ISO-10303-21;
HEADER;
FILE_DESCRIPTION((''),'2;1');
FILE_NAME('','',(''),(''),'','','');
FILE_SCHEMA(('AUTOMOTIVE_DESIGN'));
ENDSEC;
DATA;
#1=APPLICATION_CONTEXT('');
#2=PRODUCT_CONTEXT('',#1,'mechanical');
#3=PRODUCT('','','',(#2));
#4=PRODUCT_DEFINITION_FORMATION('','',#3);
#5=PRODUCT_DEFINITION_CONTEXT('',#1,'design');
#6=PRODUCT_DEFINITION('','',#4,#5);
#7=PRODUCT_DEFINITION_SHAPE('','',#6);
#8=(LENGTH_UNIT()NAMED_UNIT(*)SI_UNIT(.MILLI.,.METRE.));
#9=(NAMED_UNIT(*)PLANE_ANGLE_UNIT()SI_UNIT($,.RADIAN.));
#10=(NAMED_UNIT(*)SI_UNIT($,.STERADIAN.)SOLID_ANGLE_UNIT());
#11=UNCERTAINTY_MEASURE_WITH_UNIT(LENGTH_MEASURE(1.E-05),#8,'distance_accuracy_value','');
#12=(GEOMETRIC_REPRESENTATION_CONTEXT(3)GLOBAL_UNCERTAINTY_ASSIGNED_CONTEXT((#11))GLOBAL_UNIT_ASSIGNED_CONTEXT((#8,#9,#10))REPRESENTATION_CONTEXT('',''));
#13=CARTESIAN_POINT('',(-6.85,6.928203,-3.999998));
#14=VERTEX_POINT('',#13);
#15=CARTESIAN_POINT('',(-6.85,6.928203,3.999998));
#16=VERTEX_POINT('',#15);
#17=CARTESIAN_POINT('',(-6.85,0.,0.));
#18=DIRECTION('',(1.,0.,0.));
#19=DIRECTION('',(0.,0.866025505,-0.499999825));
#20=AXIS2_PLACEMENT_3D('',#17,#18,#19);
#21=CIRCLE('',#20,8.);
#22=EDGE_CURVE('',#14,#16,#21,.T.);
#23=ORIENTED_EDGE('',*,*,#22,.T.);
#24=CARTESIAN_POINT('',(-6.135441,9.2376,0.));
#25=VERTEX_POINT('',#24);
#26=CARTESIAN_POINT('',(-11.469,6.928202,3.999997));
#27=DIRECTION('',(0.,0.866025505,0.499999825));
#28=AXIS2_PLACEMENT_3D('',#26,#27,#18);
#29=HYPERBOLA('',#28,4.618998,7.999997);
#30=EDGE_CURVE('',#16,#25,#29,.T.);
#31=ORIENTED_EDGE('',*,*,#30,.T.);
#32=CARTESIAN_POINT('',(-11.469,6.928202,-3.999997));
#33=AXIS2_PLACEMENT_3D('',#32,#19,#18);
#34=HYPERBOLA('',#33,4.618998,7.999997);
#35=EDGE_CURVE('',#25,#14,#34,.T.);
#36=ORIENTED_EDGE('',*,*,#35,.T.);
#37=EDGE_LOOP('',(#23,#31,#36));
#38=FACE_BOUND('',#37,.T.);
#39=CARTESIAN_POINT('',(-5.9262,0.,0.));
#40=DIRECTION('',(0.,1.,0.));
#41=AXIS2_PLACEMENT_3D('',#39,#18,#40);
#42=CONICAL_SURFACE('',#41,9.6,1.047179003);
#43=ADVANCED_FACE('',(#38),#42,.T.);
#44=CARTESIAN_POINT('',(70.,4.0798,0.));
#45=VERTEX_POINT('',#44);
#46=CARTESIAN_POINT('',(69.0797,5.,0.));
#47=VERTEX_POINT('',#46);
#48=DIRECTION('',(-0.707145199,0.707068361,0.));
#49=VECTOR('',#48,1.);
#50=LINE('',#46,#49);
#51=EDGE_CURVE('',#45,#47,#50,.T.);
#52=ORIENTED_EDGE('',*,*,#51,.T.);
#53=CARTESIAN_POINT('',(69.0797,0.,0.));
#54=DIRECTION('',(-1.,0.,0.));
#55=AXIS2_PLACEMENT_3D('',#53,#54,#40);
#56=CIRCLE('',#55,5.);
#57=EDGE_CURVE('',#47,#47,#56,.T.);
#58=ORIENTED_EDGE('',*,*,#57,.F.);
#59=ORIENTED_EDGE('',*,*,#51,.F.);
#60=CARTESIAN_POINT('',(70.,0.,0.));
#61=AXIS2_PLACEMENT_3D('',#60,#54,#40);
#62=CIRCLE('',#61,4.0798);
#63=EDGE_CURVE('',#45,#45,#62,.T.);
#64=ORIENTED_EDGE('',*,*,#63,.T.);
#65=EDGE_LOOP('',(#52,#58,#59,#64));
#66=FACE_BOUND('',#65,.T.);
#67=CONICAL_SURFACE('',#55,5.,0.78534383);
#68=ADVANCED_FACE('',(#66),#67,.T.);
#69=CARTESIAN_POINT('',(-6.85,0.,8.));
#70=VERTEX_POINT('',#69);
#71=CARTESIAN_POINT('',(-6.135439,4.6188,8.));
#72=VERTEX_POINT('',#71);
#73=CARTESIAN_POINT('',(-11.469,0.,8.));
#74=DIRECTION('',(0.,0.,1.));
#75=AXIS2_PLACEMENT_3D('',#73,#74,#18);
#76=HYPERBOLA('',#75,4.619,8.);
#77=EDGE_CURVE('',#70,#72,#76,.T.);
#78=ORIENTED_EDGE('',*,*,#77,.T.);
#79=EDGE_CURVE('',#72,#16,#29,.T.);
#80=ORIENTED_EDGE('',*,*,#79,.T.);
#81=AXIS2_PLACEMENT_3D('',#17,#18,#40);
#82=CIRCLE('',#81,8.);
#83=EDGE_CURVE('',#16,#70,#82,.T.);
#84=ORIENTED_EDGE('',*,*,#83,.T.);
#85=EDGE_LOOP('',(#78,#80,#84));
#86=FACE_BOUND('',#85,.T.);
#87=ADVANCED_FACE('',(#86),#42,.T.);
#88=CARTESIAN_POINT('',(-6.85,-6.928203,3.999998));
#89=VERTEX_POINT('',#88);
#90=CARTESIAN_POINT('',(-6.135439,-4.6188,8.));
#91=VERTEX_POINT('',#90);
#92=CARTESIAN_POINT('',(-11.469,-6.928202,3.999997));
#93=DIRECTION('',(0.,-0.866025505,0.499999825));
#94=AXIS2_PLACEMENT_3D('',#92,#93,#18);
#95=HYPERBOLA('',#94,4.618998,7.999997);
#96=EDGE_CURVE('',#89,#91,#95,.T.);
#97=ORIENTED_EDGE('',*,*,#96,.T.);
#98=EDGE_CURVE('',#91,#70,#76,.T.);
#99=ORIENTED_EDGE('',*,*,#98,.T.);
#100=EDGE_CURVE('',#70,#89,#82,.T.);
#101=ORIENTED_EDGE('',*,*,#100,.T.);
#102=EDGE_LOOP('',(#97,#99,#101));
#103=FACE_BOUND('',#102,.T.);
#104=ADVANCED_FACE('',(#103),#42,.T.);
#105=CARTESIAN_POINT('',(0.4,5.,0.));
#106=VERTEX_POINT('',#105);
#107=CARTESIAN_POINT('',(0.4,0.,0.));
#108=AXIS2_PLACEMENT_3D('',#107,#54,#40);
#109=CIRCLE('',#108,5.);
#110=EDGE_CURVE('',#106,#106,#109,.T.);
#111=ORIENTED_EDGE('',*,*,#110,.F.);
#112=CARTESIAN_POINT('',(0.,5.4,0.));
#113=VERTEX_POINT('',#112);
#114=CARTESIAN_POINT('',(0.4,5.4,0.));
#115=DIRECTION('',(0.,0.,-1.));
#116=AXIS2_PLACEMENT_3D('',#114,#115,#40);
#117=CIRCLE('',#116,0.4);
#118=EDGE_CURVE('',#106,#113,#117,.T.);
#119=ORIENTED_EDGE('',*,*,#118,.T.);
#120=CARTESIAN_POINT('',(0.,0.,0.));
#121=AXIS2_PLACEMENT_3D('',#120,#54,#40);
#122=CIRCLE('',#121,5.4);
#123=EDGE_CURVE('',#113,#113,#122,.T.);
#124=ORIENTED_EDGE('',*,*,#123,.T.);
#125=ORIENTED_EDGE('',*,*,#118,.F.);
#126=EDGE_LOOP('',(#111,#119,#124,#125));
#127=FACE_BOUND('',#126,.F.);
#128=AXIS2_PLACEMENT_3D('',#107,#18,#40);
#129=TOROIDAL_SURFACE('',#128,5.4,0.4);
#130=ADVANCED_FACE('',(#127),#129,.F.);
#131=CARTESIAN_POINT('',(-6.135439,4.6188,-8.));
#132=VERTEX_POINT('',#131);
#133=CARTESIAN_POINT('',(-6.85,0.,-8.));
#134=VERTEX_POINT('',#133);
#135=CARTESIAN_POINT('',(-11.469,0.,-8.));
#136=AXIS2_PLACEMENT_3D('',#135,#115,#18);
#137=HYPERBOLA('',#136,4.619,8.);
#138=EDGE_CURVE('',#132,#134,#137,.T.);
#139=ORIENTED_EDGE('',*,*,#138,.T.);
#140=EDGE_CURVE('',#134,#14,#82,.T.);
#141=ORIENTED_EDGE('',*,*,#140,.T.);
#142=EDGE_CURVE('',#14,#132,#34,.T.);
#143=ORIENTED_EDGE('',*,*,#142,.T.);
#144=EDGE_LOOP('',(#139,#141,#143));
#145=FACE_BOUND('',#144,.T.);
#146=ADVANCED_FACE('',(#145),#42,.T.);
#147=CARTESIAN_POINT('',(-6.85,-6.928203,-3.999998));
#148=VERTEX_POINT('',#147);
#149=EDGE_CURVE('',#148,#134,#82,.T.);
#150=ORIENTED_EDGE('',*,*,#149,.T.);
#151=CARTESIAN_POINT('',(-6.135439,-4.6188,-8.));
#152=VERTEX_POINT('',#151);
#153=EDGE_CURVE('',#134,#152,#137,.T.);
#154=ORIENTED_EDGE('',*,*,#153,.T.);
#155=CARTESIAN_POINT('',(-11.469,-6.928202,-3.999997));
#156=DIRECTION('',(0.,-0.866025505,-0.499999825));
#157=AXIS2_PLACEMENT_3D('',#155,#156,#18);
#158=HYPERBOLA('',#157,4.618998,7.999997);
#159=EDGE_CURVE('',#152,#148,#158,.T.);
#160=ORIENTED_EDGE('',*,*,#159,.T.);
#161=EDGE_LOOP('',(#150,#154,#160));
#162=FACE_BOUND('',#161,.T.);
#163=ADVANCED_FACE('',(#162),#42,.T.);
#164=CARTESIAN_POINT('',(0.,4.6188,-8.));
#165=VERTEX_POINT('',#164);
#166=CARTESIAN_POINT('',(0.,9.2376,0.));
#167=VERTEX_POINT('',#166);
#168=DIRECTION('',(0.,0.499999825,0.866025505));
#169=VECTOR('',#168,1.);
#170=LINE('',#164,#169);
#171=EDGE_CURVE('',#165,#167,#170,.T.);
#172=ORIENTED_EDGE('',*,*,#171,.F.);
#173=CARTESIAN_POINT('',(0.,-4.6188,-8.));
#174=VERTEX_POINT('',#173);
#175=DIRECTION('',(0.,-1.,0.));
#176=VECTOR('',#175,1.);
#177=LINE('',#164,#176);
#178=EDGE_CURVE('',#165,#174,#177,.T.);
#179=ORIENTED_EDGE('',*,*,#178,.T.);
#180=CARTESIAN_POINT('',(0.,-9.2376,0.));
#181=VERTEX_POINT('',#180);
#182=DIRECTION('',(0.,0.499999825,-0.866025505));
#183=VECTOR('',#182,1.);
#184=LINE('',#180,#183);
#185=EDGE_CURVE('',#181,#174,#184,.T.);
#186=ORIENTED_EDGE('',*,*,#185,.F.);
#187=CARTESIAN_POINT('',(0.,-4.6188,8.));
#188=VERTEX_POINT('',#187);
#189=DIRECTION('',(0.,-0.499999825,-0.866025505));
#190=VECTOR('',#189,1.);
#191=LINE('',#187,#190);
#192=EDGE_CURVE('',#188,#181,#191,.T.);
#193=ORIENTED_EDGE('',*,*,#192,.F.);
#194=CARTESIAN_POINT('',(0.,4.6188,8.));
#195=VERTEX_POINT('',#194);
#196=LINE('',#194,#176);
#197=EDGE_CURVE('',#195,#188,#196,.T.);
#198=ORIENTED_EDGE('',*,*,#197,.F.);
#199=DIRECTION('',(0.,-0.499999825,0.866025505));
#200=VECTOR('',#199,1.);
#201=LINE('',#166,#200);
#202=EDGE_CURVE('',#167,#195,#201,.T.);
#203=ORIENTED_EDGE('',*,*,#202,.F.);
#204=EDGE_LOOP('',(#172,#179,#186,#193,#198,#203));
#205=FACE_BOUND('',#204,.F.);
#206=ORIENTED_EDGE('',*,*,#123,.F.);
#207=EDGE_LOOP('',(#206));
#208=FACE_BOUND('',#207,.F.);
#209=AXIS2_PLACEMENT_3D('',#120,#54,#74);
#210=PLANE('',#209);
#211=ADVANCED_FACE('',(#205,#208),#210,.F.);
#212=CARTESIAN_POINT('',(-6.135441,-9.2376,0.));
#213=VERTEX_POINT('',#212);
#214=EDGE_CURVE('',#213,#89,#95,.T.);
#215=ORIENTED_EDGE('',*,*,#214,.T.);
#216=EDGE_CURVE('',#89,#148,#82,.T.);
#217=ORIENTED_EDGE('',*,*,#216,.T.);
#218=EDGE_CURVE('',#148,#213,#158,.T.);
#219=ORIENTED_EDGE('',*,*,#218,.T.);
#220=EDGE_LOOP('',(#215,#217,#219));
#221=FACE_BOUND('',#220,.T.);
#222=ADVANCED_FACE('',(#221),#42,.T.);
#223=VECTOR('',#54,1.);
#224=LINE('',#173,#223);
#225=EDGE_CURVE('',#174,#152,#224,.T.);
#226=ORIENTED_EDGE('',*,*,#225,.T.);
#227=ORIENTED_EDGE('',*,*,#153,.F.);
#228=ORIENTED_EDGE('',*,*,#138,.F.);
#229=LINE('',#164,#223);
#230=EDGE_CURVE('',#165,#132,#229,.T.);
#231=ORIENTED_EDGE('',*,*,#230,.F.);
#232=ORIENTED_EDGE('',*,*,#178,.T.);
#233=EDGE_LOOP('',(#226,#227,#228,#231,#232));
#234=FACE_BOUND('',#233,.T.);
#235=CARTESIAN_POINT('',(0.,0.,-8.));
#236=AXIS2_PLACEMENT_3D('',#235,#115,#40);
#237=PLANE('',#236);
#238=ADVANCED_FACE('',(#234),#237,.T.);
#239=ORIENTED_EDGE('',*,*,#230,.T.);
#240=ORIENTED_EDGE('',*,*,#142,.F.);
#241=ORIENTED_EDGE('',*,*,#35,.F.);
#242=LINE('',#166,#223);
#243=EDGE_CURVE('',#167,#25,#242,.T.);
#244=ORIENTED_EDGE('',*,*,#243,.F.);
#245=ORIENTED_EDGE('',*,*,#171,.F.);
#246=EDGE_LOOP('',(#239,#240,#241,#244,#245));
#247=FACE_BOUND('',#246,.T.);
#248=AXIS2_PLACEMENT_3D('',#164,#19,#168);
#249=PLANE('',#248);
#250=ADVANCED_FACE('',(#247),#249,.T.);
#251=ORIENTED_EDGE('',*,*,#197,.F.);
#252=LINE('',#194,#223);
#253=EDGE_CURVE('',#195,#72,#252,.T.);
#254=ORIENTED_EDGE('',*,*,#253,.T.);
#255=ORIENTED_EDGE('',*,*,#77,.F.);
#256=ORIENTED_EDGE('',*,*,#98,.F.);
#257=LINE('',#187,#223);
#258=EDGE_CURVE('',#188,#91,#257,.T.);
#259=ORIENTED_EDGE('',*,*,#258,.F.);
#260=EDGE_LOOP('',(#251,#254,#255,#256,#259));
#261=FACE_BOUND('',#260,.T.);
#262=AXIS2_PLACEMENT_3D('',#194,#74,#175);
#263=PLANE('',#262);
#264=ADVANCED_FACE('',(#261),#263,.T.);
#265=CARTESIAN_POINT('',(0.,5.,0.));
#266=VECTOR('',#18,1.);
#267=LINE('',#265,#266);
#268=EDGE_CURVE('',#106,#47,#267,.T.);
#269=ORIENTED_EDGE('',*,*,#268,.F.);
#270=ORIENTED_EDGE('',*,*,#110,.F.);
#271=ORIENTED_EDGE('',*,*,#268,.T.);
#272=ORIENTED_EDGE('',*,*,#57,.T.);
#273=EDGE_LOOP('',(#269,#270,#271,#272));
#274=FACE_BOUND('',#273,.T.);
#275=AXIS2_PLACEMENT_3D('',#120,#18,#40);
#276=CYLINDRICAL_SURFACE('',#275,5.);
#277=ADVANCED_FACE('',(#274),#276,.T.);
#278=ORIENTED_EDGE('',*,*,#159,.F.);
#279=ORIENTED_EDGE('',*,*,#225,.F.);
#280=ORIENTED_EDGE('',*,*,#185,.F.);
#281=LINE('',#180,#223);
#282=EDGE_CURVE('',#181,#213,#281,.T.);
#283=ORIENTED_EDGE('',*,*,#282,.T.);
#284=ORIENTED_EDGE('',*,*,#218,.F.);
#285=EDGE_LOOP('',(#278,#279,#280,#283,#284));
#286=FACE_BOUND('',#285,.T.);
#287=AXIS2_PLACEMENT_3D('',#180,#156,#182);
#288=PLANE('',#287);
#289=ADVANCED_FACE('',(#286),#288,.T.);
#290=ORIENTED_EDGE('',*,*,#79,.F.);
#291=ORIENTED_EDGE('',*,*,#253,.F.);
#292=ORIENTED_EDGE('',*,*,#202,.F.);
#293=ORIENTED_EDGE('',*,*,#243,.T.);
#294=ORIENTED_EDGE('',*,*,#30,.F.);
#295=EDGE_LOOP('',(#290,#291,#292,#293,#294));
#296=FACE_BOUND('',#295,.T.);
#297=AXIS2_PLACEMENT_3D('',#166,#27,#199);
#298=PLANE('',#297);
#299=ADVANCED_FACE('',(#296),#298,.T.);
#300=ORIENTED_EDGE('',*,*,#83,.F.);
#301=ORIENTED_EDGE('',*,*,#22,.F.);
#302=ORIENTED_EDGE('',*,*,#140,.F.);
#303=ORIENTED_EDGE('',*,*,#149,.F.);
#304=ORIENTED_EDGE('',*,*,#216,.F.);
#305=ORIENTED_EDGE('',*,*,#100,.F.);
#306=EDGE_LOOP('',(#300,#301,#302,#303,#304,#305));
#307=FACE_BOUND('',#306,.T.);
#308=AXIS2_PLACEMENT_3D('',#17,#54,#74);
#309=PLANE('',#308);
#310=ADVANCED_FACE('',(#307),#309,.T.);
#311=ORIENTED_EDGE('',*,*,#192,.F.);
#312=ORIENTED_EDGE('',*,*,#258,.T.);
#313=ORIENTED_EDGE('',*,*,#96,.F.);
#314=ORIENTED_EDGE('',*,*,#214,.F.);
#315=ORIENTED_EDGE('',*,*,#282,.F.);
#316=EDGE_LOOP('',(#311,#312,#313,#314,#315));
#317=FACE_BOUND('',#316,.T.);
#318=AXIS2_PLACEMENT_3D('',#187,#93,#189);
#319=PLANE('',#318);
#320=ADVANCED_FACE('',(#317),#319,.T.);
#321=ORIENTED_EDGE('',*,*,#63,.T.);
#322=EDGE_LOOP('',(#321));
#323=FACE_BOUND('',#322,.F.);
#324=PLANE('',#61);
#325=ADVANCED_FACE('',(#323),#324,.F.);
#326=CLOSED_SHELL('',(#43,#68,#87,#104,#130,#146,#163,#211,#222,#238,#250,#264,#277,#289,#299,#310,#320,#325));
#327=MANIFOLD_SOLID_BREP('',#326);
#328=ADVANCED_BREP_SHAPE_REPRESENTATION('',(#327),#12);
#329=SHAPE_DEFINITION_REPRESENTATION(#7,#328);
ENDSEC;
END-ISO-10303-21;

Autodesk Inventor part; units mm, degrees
ref_plane "YZ Plane" through (0, 0, 0) normal (1, 0, 0) x (0, 1, 0)
ref_plane "XZ Plane" through (0, 0, 0) normal (0, 1, 0) x (-1, 0, 0)
sketch "Эскиз1" plane through (0, 0, 0) normal (0, 0, 1) x (1, 0, 0)
  line L0 (0, 5) -> (70, 5)
  line L1 (70, 5) -> (70, 0)
  line L2 (70, 0) -> (0, 0)
  line L3 (-14, 0) -> (84, 0) projected
  line L4 (0, -1) -> (0, 6) projected
  line L5 (0, 5) -> (0, 0)
  dimension "d2" = 10
  dimension "d59" = 70
revolve "Базовый элемент" add sketch "Эскиз1" angle 360 about axis through (70, 0, 0) along (-1, 0, 0)
sketch "Эскиз2" plane through (0, 0, 0) normal (-1, 0, 0) x (0, 0, 1)
  line L0 (0, 9.2376) -> (8, 4.6188)
  line L1 (8, 4.6188) -> (8, -4.6188)
  line L2 (8, -4.6188) -> (0, -9.2376)
  line L3 (0, -9.2376) -> (-8, -4.6188)
  line L4 (-8, -4.6188) -> (-8, 4.6188)
  line L5 (-8, 4.6188) -> (0, 9.2376)
  line L6 (-11.2, 0) -> (11.2, 0) projected
  line L7 (0, 12.9326) -> (0, -12.9326) projected
  point P0 (0, 0)
  point P1 (0, 0)
  dimension "d11" = 16
extrude "С головкой" add sketch "Эскиз2" along normal blind 6.85
sketch "Эскиз4" plane through (0, 0, 0) normal (0, 0, 1) x (1, 0, 0)
  line L0 (-5.9262, 9.6) -> (-6.85, 8)
  line L1 (-1.1, 0) -> (-0.234, 0)
  line L2 (-8.1732, 0) -> (1.0892, 0) projected
  line L3 (-6.85, 9.6) -> (-5.9262, 9.6)
  line L4 (-6.85, 8) -> (-6.85, 9.6)
  line L5 (0, 11.52) -> (0, -1.92) projected
  dimension "d65" = 16
  dimension "d67" = 30
  dimension "d68" = 19.2
  dimension "d69" = 6.85
revolve "Фаска1" cut sketch "Эскиз4" angle 360 about axis through (-1.1, 0, 0) along (1, 0, 0)
thread "Резьба" size "M10x1.5" class "6g" standard "ISO Metric profile" length 26
chamfer "Фаска2" distance 0.9202 distance2 0.9203 1 edges at (70, -5, 0) measured on face at (70, -2.0394, -1.2014)
fillet "Fillet" radius 0.4 1 edges at (0, -5, 0)
ref_plane "Work Plane1" through (1.525, 0, 0) normal (0, 0, 1) x (1, 0, 0)
equation "\"d2\" = GD"
equation "\"d59\" = NLG"
equation "\"d11\" = SW"
equation "\"d3\" = KOH"
equation "\"d71\" = RR1"
equation "\"d15\" = GEL"
equation "\"d6\" = -0.5 * SPD + 0.5 * GD"
equation "\"d65\" = SW"
equation "\"d67\" = ANG1"
equation "\"d68\" = 1.2 * SW"
equation "\"d69\" = KOH"
equation "\"NLG\" = 70"
equation "\"GD\" = NND"
equation "\"KOH\" = 6.85"
equation "\"GEL\" = 26"
equation "\"SW\" = 16"
equation "\"SW0\" = SW"
equation "\"SPD\" = NND - 1.2269 * PTC"
equation "\"SD\" = 0"
equation "\"ANG1\" = 30deg"
equation "\"GAL\" = 0.61345 * PTC"
equation "\"GUL\" = 0.61345 * PTC"
equation "\"RR\" = 0.1"
equation "\"RR1\" = 0.4"
equation "\"GD1\" = THREADDIA - 1.2269 * PTC"
equation "\"TOA\" = 30deg"
equation "\"PTC\" = 1.5"
equation "\"KOH1\" = 4.5"
equation "\"E0\" = 1.155 * SW"
equation "\"NND\" = 10"
equation "\"THREADDIA\" = 10"
properties part number "ANSI B18.2.3.5M - M10 x 1,5 x 70" material "Сталь, мягкая"
